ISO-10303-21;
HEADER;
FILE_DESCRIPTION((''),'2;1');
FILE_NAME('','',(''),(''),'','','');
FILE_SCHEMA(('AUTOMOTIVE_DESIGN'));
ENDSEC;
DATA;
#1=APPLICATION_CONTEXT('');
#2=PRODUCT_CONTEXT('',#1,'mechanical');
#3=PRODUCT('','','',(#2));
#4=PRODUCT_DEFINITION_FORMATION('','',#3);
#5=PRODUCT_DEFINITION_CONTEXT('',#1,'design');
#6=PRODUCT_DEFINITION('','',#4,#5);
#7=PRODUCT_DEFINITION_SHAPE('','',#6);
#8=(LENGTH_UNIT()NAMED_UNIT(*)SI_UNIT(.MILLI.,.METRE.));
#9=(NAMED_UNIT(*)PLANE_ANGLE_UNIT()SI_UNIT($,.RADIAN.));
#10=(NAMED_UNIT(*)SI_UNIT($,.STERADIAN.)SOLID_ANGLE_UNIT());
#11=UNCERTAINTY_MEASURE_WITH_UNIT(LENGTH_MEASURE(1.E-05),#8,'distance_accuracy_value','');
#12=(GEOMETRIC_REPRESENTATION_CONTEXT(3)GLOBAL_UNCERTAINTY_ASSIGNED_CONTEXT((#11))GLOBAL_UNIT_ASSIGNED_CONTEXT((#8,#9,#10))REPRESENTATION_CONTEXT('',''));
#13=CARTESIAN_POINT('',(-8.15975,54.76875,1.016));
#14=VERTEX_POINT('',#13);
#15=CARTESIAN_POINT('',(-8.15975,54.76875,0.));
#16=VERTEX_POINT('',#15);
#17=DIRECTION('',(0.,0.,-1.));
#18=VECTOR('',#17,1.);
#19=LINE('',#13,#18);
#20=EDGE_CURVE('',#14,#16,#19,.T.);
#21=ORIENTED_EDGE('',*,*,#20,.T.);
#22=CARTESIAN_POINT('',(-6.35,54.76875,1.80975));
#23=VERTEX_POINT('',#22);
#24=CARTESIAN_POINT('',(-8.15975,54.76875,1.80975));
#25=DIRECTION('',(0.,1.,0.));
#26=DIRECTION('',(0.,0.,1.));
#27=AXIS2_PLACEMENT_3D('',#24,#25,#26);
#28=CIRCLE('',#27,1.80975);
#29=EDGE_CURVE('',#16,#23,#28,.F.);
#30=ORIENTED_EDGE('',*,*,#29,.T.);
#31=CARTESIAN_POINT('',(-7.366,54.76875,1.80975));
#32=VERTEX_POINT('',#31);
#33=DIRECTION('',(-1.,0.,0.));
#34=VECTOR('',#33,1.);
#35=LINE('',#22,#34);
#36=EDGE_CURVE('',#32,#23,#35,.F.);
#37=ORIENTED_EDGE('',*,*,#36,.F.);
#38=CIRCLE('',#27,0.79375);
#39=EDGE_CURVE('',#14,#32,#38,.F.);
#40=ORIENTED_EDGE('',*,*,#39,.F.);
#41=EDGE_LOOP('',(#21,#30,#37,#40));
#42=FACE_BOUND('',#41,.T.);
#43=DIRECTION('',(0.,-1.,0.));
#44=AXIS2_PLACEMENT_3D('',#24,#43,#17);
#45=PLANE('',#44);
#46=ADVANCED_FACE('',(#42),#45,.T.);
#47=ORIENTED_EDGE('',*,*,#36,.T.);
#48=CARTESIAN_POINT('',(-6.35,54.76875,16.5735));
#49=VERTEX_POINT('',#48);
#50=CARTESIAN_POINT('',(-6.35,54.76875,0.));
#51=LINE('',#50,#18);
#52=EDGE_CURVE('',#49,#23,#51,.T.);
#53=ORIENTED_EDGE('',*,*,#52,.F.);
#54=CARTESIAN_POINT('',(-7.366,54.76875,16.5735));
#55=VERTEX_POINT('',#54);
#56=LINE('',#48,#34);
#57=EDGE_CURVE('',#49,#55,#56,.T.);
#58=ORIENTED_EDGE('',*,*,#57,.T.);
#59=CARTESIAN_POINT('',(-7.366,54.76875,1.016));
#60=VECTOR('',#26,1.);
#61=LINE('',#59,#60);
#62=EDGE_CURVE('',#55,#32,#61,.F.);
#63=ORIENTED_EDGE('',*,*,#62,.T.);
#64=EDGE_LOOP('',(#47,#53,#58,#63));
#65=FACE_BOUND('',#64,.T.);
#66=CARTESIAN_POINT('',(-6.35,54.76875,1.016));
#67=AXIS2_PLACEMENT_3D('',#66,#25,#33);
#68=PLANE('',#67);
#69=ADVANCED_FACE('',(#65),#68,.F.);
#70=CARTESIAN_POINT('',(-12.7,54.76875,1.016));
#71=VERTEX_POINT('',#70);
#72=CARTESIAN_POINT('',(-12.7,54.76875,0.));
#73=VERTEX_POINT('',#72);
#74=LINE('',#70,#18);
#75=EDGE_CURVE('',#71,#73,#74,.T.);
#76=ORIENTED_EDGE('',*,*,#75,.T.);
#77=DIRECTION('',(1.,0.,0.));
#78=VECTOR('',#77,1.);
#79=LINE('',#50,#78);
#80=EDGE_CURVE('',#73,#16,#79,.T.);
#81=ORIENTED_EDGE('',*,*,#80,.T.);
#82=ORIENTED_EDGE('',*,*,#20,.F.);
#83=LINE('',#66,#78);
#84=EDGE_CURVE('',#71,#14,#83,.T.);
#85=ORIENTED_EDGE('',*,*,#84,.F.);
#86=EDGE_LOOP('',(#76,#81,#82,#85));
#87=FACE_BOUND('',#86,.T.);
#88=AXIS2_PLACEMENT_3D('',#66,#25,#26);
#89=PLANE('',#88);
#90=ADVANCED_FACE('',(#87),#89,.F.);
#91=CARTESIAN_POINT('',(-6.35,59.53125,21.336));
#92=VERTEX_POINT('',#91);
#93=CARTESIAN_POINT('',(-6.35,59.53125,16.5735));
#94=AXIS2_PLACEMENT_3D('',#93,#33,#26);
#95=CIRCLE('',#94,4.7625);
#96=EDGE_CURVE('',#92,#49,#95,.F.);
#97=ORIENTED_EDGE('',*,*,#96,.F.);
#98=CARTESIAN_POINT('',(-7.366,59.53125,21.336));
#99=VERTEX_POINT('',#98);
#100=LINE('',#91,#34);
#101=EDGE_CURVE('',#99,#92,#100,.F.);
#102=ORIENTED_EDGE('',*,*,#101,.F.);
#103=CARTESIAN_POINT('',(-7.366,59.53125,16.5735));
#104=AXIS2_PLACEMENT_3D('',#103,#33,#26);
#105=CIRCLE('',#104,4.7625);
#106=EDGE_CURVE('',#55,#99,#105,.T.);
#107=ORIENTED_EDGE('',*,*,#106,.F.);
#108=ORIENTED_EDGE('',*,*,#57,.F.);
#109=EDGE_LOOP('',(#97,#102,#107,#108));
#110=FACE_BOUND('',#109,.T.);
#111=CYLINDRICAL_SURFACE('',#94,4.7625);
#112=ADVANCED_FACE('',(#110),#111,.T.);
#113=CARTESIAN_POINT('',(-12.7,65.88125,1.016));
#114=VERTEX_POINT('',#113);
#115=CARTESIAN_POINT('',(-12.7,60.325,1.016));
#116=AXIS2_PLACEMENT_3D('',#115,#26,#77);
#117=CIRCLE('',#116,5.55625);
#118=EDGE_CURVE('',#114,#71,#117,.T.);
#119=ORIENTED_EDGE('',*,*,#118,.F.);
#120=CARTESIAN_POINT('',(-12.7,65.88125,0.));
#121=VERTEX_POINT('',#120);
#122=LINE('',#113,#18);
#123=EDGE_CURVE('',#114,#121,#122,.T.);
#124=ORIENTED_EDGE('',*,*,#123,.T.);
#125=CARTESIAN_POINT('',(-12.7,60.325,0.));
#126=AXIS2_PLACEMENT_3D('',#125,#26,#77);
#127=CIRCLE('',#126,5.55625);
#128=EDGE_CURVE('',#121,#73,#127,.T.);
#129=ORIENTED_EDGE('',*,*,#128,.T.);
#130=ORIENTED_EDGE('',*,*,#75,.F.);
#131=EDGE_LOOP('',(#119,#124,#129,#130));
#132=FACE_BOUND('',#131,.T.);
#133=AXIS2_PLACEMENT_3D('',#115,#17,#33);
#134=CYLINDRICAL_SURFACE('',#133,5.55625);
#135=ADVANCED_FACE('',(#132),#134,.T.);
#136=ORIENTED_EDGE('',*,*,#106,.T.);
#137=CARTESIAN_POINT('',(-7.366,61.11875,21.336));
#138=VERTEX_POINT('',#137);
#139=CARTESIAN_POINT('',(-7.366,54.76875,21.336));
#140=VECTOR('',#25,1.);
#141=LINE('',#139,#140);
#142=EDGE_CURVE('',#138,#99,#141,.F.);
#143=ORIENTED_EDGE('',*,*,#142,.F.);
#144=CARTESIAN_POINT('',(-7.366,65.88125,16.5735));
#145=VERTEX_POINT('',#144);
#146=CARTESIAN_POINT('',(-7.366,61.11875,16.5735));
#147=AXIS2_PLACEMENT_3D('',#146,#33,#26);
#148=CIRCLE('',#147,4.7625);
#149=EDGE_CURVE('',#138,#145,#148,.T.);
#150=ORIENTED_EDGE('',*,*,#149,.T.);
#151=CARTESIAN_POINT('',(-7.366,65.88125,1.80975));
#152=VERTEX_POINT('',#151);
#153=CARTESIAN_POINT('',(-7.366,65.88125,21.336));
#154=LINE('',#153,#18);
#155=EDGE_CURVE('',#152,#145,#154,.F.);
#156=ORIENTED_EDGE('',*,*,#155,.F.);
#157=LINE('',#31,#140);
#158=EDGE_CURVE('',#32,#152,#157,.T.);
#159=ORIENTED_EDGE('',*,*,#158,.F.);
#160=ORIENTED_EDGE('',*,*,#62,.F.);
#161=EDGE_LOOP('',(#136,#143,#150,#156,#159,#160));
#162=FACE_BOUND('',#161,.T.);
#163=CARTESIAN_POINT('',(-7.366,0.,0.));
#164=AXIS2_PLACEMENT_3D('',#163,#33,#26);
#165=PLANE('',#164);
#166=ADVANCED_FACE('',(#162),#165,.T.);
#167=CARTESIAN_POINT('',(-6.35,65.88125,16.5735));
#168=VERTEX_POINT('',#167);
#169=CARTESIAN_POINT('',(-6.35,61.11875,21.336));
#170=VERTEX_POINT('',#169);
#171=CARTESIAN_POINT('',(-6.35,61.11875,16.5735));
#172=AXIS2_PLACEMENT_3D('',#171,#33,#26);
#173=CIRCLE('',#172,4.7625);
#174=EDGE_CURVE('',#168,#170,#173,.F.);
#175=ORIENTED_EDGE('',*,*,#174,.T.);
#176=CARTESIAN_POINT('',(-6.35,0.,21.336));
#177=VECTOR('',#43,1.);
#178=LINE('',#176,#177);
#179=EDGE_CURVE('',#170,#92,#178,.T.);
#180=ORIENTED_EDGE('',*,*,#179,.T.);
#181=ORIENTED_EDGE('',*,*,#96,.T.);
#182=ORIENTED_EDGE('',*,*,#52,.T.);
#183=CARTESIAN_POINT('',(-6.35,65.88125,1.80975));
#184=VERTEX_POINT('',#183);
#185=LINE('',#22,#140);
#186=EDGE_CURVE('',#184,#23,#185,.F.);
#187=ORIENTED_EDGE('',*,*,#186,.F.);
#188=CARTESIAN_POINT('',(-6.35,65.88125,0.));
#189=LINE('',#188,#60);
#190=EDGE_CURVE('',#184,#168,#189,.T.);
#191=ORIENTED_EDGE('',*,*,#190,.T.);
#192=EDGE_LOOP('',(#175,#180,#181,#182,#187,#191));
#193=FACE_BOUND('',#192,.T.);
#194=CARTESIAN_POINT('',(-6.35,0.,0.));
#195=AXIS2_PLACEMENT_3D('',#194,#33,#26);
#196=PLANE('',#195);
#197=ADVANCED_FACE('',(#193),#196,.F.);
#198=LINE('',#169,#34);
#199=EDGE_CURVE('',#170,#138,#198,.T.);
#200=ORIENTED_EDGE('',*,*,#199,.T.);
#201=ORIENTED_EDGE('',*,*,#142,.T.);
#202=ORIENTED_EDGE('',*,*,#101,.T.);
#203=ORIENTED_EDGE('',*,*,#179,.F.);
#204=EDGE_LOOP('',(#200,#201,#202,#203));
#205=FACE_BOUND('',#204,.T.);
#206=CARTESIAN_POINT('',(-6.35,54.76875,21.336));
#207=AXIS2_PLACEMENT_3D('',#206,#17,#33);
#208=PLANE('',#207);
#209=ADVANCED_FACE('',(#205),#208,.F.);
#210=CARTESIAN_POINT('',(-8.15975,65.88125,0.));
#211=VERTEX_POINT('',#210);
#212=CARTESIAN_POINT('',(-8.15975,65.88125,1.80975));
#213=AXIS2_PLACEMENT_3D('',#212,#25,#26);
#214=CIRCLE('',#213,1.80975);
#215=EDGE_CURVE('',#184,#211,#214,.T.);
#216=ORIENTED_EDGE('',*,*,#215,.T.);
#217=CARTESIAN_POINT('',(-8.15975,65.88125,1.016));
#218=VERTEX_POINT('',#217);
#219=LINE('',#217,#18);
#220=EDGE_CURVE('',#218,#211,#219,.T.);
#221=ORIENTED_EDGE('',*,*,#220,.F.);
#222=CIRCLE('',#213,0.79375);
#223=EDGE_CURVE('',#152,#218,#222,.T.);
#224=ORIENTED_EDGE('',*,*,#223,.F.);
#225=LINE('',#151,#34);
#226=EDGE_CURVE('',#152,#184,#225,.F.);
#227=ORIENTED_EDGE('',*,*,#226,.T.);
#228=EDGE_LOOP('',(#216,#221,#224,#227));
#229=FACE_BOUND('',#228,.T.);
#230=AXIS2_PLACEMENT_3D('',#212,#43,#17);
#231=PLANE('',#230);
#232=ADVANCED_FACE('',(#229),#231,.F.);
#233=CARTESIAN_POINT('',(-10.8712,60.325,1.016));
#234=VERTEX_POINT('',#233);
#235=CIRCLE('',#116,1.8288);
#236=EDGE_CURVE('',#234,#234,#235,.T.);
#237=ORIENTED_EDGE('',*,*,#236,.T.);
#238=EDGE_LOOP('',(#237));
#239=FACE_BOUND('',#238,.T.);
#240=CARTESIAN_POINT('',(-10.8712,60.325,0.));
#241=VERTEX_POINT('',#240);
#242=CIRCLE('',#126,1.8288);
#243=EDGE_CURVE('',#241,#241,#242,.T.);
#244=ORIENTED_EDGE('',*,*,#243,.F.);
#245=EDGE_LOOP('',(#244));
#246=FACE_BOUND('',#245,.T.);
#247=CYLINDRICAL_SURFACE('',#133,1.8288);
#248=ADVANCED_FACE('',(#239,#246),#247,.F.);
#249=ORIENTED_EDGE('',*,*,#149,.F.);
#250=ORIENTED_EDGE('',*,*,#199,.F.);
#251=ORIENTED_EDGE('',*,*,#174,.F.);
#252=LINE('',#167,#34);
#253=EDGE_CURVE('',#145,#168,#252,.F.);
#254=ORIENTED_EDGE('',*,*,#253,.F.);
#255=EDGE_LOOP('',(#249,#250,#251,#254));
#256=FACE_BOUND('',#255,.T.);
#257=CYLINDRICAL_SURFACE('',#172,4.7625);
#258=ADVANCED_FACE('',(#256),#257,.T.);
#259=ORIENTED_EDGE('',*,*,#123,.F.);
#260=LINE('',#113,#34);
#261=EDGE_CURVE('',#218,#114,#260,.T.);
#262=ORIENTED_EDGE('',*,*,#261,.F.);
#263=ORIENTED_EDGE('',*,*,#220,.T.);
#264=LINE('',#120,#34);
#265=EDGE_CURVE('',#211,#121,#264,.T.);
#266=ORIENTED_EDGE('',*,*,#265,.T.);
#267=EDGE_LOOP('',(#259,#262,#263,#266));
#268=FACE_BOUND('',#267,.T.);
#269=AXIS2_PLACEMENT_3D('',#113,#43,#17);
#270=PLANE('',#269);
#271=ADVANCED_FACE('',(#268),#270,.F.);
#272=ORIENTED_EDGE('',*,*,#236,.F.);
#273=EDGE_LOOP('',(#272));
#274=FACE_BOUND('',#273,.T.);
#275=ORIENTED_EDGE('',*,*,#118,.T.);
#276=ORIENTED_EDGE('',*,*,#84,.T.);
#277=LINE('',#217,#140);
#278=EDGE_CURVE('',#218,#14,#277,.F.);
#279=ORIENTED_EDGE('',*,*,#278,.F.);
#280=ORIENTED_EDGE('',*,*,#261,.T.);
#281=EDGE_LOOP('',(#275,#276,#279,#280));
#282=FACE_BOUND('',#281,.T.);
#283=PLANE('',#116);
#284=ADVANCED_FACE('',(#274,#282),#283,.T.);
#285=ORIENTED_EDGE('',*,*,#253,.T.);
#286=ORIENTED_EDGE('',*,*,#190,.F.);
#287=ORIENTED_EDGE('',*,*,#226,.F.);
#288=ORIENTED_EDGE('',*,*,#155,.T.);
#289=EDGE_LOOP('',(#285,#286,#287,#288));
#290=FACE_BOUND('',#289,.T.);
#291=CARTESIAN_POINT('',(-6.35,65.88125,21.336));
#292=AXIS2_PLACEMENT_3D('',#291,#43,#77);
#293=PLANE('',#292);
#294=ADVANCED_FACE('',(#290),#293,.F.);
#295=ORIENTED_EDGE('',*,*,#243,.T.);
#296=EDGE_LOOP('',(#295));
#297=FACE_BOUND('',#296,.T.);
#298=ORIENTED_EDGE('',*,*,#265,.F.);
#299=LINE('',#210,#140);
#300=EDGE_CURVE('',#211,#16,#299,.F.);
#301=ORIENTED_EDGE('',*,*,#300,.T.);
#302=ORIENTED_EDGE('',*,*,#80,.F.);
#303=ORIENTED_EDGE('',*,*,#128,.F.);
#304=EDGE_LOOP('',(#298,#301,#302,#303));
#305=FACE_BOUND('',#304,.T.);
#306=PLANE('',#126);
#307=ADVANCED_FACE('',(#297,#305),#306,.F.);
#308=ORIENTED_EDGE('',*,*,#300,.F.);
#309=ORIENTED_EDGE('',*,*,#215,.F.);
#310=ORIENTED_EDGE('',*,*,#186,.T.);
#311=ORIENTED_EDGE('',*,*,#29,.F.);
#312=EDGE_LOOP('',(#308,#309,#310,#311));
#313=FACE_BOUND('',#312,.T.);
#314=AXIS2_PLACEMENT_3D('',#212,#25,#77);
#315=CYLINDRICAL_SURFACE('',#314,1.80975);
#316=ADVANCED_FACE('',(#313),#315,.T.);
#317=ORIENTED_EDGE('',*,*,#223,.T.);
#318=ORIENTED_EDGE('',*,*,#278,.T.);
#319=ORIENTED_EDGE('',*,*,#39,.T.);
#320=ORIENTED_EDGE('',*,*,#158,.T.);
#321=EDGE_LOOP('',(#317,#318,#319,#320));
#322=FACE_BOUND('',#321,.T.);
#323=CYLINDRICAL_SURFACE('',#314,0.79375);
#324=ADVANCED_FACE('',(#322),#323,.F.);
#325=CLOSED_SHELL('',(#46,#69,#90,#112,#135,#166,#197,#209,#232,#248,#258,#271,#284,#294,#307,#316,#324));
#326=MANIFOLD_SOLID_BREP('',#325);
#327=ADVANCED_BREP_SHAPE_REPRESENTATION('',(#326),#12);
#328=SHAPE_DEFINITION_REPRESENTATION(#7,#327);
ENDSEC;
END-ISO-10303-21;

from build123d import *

# Parameters (mm, degrees)
SKETCH1_R                    = 1.8288
BASE_FLANGE1_DEPTH           = 1.016
EDGE_FLANGE1_STRIP_W         = 5.6515
EDGE_FLANGE1_STRIP_H         = 1.016
EDGE_FLANGE1_STRIP_CUT_DEPTH = 11.1125
EDGE_FLANGE1_DEPTH           = 11.1125
FILLET1_R                    = 4.7625


# Sheet-metal steps are written as plain solids
with BuildPart() as part:
    # Sketch1 → Base-Flange1 (new body)
    with BuildSketch(Plane.XY):
        with BuildLine():
            Line((-12.7, 65.88125), (-6.35, 65.88125))
            Line((-6.35, 65.88125), (-6.35, 54.76875))
            Line((-6.35, 54.76875), (-12.7, 54.76875))
            ThreePointArc((-12.7, 54.76875), (-18.25625, 60.325), (-12.7, 65.88125))
        make_face()
        with Locations((-12.7, 60.325)):
            Circle(SKETCH1_R, mode=Mode.SUBTRACT)
    extrude(amount=BASE_FLANGE1_DEPTH)

    # Edge-Flange1 strip (across the edge) → Edge-Flange1 strip cut (cut)
    with BuildSketch(Plane(origin=(-6.35, 54.76875, 1.016), x_dir=(-1, 0, 0), z_dir=(0, 1, 0))):
        with Locations((-1.016, -0.508)):
            Rectangle(EDGE_FLANGE1_STRIP_W, EDGE_FLANGE1_STRIP_H)
    extrude(amount=EDGE_FLANGE1_STRIP_CUT_DEPTH, mode=Mode.SUBTRACT)

    # Edge-Flange1 section (across the edge) → Edge-Flange1 (add)
    with BuildSketch(Plane(origin=(-6.35, 54.76875, 1.016), x_dir=(-1, 0, 0), z_dir=(0, 1, 0))):
        with BuildLine():
            Line((0, 0.79375), (0, 20.32))
            Line((0, 20.32), (1.016, 20.32))
            Line((1.016, 20.32), (1.016, 0.79375))
            ThreePointArc((1.016, 0.79375), (1.248483992, 0.232483992), (1.80975, 0))
            Line((1.80975, 0), (1.80975, -1.016))
            ThreePointArc((1.80975, -1.016), (0.530063503, -0.485936497), (0, 0.79375))
        make_face()
    extrude(amount=EDGE_FLANGE1_DEPTH)

    # Fillet1
    fillet1_edges = [part.edges().sort_by_distance(p)[0] for p in [
        (-6.858, 54.76875, 21.336),
        (-6.858, 65.88125, 21.336),
    ]]
    fillet(fillet1_edges, radius=FILLET1_R)


solid = part.part
